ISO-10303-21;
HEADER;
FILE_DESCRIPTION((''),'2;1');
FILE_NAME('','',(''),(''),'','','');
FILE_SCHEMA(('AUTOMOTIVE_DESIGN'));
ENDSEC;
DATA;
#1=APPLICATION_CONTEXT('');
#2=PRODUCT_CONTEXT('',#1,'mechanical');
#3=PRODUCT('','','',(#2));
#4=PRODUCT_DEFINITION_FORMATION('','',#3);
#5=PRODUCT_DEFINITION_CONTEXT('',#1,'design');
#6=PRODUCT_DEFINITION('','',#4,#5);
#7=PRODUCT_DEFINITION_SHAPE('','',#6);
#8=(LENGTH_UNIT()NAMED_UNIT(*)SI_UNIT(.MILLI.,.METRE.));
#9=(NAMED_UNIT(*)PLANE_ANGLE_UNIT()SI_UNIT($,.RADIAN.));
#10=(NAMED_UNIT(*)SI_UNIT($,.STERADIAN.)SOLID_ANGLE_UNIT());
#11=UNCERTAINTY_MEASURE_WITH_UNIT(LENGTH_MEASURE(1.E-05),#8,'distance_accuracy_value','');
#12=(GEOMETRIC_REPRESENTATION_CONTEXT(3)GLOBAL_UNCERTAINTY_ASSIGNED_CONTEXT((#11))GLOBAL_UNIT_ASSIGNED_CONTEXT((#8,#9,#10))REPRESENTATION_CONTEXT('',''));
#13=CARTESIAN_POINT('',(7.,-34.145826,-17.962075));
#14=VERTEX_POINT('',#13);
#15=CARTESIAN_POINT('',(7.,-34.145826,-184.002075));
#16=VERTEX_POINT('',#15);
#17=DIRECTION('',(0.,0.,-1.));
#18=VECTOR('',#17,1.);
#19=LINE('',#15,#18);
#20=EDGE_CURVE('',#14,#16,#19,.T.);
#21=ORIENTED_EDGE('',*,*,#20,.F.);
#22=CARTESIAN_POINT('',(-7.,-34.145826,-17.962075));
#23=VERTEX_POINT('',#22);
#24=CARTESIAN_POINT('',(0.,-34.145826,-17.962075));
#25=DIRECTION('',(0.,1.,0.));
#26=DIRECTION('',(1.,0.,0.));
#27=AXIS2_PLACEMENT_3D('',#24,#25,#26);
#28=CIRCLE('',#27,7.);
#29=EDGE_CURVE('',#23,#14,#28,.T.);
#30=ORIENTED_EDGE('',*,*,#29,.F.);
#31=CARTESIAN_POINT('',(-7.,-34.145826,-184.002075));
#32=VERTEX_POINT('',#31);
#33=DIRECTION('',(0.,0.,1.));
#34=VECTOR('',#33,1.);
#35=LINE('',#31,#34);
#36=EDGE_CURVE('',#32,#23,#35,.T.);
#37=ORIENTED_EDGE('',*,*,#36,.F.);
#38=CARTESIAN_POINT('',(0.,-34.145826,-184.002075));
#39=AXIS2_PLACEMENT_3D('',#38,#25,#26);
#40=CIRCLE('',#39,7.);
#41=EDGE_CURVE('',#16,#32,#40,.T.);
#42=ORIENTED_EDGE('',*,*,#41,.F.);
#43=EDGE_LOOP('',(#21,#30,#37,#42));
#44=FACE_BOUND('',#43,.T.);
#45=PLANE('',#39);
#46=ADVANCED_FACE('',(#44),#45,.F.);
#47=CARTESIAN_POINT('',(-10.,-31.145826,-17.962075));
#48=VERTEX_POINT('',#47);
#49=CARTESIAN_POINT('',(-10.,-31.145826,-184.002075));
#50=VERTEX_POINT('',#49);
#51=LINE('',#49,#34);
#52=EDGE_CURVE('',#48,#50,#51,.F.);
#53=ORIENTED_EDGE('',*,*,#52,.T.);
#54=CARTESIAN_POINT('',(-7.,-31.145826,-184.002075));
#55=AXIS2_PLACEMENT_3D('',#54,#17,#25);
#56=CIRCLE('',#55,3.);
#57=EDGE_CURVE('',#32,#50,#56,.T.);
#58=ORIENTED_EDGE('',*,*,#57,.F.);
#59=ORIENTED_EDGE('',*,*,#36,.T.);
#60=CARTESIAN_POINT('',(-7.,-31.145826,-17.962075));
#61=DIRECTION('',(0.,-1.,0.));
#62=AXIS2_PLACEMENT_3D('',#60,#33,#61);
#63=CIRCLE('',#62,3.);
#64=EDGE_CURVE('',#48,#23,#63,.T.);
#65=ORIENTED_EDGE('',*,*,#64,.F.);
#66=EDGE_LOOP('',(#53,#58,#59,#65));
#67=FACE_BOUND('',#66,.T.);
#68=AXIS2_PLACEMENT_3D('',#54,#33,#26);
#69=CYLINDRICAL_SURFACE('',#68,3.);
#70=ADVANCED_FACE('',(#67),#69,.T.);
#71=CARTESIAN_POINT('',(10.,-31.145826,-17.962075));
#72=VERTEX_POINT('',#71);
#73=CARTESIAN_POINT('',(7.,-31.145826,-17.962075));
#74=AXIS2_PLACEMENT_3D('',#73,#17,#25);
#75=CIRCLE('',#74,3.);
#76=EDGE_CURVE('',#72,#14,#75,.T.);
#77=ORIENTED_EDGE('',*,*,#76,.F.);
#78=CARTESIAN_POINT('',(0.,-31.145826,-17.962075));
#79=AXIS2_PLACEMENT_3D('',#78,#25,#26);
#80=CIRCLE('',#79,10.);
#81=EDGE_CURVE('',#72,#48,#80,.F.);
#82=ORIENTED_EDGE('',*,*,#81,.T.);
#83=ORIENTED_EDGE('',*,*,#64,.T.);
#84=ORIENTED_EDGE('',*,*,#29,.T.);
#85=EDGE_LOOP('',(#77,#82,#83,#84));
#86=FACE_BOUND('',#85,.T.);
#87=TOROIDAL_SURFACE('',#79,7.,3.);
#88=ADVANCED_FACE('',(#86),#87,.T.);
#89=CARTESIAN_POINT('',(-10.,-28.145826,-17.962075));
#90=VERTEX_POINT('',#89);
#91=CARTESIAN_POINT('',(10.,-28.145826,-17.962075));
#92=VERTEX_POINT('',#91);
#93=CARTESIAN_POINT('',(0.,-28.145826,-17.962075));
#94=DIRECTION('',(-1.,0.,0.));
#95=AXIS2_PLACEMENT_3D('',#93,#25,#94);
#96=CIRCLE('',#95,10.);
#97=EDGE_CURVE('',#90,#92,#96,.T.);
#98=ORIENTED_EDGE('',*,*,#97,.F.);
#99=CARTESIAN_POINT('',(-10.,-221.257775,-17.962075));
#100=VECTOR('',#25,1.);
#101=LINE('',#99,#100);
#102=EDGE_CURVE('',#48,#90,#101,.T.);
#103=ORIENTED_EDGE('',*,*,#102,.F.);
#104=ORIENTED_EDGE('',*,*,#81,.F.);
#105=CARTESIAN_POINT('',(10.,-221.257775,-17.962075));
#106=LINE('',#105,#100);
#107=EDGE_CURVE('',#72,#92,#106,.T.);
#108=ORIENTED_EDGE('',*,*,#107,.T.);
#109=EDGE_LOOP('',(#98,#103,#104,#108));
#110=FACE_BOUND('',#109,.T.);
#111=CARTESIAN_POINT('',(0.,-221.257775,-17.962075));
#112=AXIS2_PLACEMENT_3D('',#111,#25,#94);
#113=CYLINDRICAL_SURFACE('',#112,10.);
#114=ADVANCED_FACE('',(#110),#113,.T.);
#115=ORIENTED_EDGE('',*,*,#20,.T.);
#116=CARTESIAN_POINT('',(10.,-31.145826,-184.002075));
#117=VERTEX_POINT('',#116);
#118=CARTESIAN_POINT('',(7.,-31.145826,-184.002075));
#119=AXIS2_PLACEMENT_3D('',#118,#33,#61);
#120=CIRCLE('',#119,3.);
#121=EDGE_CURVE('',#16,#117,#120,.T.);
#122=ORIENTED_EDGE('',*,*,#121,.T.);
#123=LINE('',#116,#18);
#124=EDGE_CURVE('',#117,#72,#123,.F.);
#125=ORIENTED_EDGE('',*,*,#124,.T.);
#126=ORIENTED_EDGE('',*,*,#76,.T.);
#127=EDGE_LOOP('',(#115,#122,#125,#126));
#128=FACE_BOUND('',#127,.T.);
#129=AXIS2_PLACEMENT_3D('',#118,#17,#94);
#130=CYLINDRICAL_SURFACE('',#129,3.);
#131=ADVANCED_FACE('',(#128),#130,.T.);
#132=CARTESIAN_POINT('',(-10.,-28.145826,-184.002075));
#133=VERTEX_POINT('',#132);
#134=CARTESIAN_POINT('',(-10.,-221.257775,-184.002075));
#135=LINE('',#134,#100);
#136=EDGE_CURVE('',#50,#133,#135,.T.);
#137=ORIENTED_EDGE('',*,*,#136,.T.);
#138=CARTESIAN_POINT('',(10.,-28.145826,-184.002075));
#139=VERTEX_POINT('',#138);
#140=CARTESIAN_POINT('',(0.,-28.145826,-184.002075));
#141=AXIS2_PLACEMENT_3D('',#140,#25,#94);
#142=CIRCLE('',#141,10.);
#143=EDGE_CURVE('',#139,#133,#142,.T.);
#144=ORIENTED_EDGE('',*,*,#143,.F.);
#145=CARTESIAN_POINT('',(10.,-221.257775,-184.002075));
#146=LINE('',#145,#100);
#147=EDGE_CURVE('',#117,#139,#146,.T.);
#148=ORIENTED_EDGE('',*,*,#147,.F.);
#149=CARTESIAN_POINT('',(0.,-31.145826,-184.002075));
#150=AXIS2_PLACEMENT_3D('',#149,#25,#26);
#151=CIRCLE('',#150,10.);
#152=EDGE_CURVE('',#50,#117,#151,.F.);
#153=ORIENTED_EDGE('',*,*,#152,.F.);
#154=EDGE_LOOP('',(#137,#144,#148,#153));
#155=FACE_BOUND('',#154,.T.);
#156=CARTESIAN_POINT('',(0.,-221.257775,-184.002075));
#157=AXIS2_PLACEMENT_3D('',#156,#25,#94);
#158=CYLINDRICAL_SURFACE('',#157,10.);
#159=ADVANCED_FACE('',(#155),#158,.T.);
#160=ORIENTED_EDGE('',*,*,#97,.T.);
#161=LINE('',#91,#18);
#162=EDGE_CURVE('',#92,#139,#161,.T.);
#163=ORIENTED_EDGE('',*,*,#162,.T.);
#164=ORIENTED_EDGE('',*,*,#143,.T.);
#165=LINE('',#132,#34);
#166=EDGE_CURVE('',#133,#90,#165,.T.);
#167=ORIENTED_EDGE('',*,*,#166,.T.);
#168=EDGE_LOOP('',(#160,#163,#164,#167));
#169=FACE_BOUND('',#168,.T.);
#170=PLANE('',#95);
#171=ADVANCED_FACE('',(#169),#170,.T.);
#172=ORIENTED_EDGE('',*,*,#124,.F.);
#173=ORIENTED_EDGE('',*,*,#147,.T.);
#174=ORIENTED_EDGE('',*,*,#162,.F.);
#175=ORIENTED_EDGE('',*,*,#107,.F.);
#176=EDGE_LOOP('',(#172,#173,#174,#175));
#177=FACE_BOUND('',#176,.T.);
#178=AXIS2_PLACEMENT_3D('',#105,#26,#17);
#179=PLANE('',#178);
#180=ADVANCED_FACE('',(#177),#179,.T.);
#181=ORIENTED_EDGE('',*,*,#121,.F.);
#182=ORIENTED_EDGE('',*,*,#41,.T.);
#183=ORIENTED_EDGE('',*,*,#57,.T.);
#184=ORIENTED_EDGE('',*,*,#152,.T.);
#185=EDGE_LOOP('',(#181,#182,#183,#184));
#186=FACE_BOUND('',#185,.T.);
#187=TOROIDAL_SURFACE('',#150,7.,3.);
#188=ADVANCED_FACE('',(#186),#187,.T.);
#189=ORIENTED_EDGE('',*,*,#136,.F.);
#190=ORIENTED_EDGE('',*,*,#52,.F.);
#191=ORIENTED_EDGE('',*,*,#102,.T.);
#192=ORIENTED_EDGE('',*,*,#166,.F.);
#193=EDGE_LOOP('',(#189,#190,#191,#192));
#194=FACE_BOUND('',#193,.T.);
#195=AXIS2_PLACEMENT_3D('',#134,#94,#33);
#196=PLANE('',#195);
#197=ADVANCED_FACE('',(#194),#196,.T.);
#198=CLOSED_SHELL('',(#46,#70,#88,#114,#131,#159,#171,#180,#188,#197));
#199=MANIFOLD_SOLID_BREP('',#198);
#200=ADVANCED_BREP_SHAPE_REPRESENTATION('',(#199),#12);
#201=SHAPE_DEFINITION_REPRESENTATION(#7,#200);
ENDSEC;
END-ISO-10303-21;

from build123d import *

# Parameters (mm, degrees)
BOSS_EXTRUDE1_DEPTH = 6
CAVITY1_START       = -194.002075021
CAVITY1_DEPTH       = 186.04
CAVITY1_2_ANGLE     = 180
CAVITY1_3_ANGLE     = 180


with BuildPart() as part:
    # Sketch1 → Boss-Extrude1 (new body)
    with BuildSketch(Plane(origin=(0, -28.145825623, 0), x_dir=(1, 0, 0), z_dir=(0, 1, 0))):
        with BuildLine():
            Line((-10, 184.002075021), (-10, 17.962075021))
            ThreePointArc((-10, 17.962075021), (0, 7.962075021), (10, 17.962075021))
            Line((10, 17.962075021), (10, 184.002075021))
            ThreePointArc((10, 184.002075021), (0, 194.002075021), (-10, 184.002075021))
        make_face()
    extrude(amount=-BOSS_EXTRUDE1_DEPTH)

    # Cavity1: read off the stored shape, not the designer's step
    # Cavity1 outline → Cavity1 (cut)
    with BuildSketch(Plane.XY.offset(CAVITY1_START)):
        with BuildLine():
            Line((10, -34.145825623), (10, -31.145825623))
            ThreePointArc((10, -31.145825623), (9.121320344, -33.267145967), (7, -34.145825623))
            Line((7, -34.145825623), (10, -34.145825623))
        make_face()
        with BuildLine():
            Line((-10, -34.145825623), (-7, -34.145825623))
            ThreePointArc((-7, -34.145825623), (-9.121320344, -33.267145967), (-10, -31.145825623))
            Line((-10, -31.145825623), (-10, -34.145825623))
        make_face()
    extrude(amount=CAVITY1_DEPTH, mode=Mode.SUBTRACT)

    # Cavity1 2 outline → Cavity1 2 (revolve, cut)
    with BuildSketch(Plane.XY.offset(-184.002075021)):
        with BuildLine():
            ThreePointArc((10, -31.145825623), (9.121320344, -33.267145967), (7, -34.145825623))
            Line((7, -34.145825623), (10, -34.145825623))
            Line((10, -34.145825623), (10, -31.145825623))
        make_face()
    revolve(axis=Axis((0, 0, -184.002075021), (0, 1, 0)), revolution_arc=CAVITY1_2_ANGLE, mode=Mode.SUBTRACT)

    # Cavity1 3 outline → Cavity1 3 (revolve, cut)
    with BuildSketch(Plane(origin=(0, 0, -17.962075021), x_dir=(-1, 0, 0), z_dir=(0, 0, -1))):
        with BuildLine():
            ThreePointArc((10, -31.145825623), (9.121320344, -33.267145967), (7, -34.145825623))
            Line((7, -34.145825623), (10, -34.145825623))
            Line((10, -34.145825623), (10, -31.145825623))
        make_face()
    revolve(axis=Axis((0, 0, -17.962075021), (0, 1, 0)), revolution_arc=CAVITY1_3_ANGLE, mode=Mode.SUBTRACT)


solid = part.part
